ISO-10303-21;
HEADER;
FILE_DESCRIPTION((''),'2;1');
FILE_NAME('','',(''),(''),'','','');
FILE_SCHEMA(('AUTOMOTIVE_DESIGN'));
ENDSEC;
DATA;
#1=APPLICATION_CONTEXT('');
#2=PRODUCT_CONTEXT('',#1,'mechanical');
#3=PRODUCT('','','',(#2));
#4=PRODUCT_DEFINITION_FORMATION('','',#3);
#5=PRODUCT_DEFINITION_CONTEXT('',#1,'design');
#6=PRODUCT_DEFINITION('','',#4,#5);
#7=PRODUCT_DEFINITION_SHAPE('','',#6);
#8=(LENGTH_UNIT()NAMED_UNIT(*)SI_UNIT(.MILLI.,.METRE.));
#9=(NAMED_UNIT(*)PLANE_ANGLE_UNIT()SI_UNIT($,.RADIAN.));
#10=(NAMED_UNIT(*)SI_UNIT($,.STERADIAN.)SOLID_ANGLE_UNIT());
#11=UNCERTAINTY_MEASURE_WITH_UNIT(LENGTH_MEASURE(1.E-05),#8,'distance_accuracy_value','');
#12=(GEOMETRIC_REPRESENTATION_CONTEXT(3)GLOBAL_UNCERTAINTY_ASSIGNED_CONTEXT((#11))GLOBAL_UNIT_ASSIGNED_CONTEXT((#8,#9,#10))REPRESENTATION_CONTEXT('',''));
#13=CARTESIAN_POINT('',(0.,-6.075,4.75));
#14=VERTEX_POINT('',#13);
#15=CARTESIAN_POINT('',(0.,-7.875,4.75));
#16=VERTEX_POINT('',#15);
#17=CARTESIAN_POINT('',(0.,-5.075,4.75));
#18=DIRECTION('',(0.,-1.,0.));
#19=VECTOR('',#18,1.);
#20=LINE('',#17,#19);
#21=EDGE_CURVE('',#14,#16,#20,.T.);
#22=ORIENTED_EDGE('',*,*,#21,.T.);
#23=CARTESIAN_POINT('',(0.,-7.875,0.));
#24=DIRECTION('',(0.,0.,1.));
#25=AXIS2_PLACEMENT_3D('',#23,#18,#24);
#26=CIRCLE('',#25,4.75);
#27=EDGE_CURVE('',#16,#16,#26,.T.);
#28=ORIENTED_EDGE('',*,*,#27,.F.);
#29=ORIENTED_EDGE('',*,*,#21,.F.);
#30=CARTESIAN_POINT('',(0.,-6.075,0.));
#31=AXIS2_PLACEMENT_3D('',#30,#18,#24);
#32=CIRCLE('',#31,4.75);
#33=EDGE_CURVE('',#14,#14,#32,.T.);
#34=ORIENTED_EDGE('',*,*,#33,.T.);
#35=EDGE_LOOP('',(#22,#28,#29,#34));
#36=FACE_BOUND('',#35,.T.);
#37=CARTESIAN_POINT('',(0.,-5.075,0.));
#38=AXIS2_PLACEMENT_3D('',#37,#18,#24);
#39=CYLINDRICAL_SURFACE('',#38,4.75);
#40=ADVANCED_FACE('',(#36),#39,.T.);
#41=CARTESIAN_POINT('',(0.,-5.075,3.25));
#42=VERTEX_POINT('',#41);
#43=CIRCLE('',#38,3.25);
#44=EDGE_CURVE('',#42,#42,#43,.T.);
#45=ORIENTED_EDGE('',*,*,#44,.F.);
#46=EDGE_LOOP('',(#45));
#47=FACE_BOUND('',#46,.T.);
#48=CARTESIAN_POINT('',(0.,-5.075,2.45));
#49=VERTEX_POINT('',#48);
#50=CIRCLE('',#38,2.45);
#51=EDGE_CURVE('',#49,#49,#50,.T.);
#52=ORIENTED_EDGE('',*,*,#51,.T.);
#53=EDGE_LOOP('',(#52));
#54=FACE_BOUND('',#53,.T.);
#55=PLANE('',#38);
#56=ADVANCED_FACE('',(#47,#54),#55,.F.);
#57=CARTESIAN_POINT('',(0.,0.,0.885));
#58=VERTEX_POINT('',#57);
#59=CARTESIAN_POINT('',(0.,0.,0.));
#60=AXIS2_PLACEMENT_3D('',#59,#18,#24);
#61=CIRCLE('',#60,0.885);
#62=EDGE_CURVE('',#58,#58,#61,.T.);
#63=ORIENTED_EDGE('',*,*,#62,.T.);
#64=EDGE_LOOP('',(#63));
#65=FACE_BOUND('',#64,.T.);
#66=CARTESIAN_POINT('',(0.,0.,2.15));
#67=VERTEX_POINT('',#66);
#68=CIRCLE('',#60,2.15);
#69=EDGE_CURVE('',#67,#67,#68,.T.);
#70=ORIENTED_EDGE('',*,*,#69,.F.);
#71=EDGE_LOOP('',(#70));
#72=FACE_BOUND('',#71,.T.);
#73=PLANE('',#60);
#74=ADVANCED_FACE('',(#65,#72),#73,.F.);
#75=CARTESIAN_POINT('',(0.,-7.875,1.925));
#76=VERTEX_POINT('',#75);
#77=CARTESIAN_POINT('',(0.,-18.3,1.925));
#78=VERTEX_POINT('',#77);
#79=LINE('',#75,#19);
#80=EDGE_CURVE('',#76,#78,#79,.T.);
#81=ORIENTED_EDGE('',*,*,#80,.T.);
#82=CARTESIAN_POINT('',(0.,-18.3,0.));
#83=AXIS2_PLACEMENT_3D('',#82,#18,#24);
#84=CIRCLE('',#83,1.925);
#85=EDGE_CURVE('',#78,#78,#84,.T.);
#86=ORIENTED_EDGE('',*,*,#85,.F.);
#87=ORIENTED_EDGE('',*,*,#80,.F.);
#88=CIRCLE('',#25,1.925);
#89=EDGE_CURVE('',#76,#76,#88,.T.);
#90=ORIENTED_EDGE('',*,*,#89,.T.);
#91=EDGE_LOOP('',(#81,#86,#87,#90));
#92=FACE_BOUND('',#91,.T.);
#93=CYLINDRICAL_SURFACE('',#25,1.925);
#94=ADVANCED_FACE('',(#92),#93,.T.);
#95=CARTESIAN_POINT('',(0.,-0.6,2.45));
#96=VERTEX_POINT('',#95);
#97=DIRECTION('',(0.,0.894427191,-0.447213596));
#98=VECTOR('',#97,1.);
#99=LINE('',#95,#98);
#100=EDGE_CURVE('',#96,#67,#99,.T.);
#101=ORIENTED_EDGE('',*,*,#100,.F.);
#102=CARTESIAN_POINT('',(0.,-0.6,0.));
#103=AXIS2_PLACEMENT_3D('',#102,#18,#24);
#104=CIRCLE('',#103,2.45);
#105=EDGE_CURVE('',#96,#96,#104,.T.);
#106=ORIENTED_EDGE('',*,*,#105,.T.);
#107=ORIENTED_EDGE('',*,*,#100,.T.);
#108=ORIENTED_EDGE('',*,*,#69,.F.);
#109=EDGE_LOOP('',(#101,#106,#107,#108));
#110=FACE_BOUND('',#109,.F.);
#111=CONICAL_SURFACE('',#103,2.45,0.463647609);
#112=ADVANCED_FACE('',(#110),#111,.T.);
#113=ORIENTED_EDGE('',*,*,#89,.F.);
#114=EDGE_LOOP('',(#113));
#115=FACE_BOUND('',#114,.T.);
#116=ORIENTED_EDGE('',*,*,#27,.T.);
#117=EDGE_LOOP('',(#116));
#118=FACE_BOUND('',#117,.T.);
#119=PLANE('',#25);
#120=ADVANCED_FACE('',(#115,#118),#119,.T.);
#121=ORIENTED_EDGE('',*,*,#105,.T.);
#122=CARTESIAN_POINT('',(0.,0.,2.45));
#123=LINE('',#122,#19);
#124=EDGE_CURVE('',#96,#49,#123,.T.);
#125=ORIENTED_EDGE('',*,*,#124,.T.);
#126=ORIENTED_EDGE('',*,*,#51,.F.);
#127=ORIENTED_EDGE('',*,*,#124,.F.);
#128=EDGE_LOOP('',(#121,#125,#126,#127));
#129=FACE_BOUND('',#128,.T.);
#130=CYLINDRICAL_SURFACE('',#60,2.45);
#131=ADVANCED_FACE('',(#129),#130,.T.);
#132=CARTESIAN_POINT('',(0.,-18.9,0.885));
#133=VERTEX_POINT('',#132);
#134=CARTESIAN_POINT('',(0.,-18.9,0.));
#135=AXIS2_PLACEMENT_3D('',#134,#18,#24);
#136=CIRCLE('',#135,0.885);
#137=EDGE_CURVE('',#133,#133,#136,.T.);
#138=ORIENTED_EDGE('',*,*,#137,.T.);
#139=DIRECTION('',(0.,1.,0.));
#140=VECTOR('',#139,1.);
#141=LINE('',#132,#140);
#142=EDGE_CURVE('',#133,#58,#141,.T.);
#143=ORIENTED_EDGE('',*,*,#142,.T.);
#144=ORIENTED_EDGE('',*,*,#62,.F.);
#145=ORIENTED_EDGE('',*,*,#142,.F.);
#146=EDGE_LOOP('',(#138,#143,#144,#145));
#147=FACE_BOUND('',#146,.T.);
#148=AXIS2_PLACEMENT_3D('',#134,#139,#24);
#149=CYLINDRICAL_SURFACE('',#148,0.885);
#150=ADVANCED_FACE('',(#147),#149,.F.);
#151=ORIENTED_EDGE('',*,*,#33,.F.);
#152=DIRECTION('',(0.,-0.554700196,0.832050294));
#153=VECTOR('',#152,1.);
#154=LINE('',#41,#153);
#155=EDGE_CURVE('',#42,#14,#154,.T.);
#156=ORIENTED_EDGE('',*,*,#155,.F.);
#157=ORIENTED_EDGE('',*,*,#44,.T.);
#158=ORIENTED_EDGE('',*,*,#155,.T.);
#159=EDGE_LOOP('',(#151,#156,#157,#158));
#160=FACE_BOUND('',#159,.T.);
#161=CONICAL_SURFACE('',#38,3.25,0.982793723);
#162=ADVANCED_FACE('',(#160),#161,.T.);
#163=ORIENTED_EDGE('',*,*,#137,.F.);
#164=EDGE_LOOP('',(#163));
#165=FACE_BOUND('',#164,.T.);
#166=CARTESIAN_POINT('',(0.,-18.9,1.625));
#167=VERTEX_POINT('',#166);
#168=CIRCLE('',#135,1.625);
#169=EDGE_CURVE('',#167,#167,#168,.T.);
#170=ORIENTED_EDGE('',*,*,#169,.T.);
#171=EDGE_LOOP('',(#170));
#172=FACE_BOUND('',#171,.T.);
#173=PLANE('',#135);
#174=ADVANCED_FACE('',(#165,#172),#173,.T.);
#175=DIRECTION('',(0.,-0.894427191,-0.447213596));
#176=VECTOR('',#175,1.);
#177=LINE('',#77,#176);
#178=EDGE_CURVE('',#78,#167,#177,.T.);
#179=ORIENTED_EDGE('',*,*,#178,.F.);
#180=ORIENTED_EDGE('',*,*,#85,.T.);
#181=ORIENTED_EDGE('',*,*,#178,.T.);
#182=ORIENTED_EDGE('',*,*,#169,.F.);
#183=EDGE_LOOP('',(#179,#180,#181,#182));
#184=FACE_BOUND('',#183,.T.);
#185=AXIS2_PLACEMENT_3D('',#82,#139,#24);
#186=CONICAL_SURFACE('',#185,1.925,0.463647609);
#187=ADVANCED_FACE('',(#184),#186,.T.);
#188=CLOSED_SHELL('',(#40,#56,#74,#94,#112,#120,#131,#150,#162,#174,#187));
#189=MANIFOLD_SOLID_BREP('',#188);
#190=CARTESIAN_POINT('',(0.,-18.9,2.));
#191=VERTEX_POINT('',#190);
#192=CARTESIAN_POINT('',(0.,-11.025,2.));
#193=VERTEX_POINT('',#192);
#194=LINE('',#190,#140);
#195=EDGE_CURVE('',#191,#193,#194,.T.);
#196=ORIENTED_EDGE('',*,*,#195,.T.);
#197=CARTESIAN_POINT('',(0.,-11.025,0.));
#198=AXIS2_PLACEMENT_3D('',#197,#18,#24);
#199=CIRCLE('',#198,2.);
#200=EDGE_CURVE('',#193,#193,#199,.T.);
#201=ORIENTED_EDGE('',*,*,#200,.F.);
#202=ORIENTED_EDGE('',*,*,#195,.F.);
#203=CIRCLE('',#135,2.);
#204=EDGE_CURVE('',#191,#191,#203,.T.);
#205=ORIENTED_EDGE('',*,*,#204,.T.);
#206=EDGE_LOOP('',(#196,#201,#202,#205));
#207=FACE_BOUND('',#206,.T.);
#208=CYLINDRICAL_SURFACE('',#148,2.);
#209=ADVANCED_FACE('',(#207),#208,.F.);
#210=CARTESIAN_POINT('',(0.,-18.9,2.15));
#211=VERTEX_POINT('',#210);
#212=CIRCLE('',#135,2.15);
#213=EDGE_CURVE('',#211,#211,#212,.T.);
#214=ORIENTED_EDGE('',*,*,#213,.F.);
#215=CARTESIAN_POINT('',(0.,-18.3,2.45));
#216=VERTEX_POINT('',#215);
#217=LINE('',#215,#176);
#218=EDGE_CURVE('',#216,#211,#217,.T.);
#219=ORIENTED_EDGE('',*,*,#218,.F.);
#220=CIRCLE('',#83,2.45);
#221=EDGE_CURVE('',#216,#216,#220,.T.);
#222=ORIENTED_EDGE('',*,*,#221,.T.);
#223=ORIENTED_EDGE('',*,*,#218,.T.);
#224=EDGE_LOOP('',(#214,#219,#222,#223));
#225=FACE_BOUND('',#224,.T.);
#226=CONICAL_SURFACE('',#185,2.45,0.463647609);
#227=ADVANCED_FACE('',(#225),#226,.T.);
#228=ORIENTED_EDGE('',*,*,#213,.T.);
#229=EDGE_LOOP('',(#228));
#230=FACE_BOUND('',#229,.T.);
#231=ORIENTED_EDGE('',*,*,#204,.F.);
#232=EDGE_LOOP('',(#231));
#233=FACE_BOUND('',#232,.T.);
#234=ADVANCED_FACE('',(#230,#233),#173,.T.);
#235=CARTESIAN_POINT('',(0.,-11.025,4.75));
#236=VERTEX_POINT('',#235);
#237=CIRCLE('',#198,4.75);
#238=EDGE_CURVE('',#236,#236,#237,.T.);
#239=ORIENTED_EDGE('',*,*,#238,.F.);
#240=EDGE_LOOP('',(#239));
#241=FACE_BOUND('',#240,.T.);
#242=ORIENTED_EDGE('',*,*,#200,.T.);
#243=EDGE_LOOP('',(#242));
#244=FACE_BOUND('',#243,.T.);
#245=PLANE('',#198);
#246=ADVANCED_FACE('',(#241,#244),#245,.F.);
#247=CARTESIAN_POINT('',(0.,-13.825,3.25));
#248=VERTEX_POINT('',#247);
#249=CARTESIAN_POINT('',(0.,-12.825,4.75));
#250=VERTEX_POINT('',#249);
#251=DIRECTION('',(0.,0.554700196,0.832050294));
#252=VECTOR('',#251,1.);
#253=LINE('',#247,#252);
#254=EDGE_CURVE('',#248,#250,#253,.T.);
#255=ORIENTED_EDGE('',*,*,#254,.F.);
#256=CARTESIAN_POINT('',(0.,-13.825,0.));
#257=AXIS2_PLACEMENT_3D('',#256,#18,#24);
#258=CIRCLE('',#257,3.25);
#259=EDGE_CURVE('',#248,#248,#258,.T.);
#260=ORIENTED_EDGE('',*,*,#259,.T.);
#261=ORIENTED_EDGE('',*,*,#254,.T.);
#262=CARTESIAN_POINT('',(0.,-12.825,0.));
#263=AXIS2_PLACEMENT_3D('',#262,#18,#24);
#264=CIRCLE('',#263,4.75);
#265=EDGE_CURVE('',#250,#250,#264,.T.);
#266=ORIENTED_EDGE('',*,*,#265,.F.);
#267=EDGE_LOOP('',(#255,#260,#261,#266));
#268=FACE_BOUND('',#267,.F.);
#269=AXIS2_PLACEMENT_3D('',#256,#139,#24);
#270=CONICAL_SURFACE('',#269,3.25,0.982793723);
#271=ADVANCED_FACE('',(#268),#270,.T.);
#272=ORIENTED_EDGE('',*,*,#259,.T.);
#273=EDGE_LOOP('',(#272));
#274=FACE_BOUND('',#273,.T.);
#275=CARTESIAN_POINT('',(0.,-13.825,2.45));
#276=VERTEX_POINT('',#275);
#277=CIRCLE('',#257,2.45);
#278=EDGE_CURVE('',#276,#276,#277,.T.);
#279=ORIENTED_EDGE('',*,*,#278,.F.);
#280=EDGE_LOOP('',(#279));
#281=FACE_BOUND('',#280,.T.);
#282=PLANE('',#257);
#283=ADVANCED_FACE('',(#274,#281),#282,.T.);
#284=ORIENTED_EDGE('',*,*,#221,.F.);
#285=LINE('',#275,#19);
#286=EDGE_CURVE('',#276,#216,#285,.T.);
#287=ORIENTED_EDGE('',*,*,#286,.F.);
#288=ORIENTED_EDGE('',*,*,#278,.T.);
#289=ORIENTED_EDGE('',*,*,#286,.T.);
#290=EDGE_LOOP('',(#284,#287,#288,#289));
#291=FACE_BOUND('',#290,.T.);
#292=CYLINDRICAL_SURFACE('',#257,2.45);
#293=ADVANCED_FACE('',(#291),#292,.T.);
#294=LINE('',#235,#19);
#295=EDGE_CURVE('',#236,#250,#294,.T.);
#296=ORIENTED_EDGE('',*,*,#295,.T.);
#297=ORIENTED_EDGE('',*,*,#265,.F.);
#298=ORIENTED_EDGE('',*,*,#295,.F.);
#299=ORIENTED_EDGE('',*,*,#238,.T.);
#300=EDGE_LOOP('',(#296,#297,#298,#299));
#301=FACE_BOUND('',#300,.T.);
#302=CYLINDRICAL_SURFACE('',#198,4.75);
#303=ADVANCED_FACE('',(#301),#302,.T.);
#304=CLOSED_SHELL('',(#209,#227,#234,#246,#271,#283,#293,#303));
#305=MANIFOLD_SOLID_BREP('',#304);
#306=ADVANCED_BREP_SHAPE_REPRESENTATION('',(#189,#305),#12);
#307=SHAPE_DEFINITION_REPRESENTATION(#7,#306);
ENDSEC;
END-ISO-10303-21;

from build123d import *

# Parameters (mm, degrees)
F2_SIZE2   = 0.3
F2_SIZE    = 0.6
F2_2_SIZE2 = 0.3
F2_2_SIZE  = 0.6
F2_3_SIZE2 = 0.3
F2_3_SIZE  = 0.6


# Not quite as in the source:
# - a fillet or chamfer that OpenCascade refuses, or shapes differently, is made with other operations: its cross-section is extruded or revolved along the edge and cut away or added
# - two fillets or chamfers of one size are made in one step


with BuildPart() as f1:
    # F0 (on Right) → F1 (revolve)
    with BuildSketch(Plane.YZ):
        Polygon((-18.9, 1.925), (-18.9, 0.885), (0, 0.885), (0, 2.45), (-5.075, 2.45), (-5.075, 4.75), (-7.875, 4.75), (-7.875, 1.925), align=None)
    revolve(axis=Axis((0, -9.45, 0), (0, -1, 0)))

    # F2
    f2_edges = [f1.edges().sort_by_distance(p)[0] for p in [
        (0, -18.9, -1.925),
    ]]
    f2_side = f1.faces().sort_by_distance((0, -13.3875, -1.925))[0]
    chamfer(f2_edges, length=F2_SIZE, length2=F2_SIZE2, reference=f2_side)

    # F2#2
    f2_2_edges = [f1.edges().sort_by_distance(p)[0] for p in [
        (0, 0, -2.45),
    ]]
    f2_2_side = f1.faces().sort_by_distance((0, -2.5375, -2.45))[0]
    chamfer(f2_2_edges, length=F2_2_SIZE, length2=F2_2_SIZE2, reference=f2_2_side)

    # F4#2: chamfer of 1 x 1.5 on 1 edges, made by hand

    # F4_2_s1 → F4_2_t2 (revolve, cut)
    with BuildSketch(Plane.YZ):
        Polygon((-5.075, 3.25), (-6.075, 4.75), (-5.075, 4.75), align=None)
    revolve(axis=Axis((0, -5.075, 0), (0, -1, 0)), mode=Mode.SUBTRACT)


with BuildPart() as f1b:
    # F0 (on Right) → F1, piece 2 (revolve)
    with BuildSketch(Plane.YZ):
        Polygon((-18.9, 2.45), (-18.9, 2), (-11.025, 2), (-11.025, 4.75), (-13.825, 4.75), (-13.825, 2.45), align=None)
    revolve(axis=Axis((0, -9.45, 0), (0, -1, 0)))

    # F2#3
    f2_3_edges = [f1b.edges().sort_by_distance(p)[0] for p in [
        (0, -18.9, -2.45),
    ]]
    f2_3_side = f1b.faces().sort_by_distance((0, -16.3625, -2.45))[0]
    chamfer(f2_3_edges, length=F2_3_SIZE, length2=F2_3_SIZE2, reference=f2_3_side)

    # F4: chamfer of 1 x 1.5 on 1 edges, made by hand

    # F4_s1 → F4_t2 (revolve, cut)
    with BuildSketch(Plane.YZ):
        Polygon((-13.825, 3.25), (-12.825, 4.75), (-13.825, 4.75), align=None)
    revolve(axis=Axis((0, -13.825, 0), (0, -1, 0)), mode=Mode.SUBTRACT)


solid = Compound([f1.part, f1b.part])
